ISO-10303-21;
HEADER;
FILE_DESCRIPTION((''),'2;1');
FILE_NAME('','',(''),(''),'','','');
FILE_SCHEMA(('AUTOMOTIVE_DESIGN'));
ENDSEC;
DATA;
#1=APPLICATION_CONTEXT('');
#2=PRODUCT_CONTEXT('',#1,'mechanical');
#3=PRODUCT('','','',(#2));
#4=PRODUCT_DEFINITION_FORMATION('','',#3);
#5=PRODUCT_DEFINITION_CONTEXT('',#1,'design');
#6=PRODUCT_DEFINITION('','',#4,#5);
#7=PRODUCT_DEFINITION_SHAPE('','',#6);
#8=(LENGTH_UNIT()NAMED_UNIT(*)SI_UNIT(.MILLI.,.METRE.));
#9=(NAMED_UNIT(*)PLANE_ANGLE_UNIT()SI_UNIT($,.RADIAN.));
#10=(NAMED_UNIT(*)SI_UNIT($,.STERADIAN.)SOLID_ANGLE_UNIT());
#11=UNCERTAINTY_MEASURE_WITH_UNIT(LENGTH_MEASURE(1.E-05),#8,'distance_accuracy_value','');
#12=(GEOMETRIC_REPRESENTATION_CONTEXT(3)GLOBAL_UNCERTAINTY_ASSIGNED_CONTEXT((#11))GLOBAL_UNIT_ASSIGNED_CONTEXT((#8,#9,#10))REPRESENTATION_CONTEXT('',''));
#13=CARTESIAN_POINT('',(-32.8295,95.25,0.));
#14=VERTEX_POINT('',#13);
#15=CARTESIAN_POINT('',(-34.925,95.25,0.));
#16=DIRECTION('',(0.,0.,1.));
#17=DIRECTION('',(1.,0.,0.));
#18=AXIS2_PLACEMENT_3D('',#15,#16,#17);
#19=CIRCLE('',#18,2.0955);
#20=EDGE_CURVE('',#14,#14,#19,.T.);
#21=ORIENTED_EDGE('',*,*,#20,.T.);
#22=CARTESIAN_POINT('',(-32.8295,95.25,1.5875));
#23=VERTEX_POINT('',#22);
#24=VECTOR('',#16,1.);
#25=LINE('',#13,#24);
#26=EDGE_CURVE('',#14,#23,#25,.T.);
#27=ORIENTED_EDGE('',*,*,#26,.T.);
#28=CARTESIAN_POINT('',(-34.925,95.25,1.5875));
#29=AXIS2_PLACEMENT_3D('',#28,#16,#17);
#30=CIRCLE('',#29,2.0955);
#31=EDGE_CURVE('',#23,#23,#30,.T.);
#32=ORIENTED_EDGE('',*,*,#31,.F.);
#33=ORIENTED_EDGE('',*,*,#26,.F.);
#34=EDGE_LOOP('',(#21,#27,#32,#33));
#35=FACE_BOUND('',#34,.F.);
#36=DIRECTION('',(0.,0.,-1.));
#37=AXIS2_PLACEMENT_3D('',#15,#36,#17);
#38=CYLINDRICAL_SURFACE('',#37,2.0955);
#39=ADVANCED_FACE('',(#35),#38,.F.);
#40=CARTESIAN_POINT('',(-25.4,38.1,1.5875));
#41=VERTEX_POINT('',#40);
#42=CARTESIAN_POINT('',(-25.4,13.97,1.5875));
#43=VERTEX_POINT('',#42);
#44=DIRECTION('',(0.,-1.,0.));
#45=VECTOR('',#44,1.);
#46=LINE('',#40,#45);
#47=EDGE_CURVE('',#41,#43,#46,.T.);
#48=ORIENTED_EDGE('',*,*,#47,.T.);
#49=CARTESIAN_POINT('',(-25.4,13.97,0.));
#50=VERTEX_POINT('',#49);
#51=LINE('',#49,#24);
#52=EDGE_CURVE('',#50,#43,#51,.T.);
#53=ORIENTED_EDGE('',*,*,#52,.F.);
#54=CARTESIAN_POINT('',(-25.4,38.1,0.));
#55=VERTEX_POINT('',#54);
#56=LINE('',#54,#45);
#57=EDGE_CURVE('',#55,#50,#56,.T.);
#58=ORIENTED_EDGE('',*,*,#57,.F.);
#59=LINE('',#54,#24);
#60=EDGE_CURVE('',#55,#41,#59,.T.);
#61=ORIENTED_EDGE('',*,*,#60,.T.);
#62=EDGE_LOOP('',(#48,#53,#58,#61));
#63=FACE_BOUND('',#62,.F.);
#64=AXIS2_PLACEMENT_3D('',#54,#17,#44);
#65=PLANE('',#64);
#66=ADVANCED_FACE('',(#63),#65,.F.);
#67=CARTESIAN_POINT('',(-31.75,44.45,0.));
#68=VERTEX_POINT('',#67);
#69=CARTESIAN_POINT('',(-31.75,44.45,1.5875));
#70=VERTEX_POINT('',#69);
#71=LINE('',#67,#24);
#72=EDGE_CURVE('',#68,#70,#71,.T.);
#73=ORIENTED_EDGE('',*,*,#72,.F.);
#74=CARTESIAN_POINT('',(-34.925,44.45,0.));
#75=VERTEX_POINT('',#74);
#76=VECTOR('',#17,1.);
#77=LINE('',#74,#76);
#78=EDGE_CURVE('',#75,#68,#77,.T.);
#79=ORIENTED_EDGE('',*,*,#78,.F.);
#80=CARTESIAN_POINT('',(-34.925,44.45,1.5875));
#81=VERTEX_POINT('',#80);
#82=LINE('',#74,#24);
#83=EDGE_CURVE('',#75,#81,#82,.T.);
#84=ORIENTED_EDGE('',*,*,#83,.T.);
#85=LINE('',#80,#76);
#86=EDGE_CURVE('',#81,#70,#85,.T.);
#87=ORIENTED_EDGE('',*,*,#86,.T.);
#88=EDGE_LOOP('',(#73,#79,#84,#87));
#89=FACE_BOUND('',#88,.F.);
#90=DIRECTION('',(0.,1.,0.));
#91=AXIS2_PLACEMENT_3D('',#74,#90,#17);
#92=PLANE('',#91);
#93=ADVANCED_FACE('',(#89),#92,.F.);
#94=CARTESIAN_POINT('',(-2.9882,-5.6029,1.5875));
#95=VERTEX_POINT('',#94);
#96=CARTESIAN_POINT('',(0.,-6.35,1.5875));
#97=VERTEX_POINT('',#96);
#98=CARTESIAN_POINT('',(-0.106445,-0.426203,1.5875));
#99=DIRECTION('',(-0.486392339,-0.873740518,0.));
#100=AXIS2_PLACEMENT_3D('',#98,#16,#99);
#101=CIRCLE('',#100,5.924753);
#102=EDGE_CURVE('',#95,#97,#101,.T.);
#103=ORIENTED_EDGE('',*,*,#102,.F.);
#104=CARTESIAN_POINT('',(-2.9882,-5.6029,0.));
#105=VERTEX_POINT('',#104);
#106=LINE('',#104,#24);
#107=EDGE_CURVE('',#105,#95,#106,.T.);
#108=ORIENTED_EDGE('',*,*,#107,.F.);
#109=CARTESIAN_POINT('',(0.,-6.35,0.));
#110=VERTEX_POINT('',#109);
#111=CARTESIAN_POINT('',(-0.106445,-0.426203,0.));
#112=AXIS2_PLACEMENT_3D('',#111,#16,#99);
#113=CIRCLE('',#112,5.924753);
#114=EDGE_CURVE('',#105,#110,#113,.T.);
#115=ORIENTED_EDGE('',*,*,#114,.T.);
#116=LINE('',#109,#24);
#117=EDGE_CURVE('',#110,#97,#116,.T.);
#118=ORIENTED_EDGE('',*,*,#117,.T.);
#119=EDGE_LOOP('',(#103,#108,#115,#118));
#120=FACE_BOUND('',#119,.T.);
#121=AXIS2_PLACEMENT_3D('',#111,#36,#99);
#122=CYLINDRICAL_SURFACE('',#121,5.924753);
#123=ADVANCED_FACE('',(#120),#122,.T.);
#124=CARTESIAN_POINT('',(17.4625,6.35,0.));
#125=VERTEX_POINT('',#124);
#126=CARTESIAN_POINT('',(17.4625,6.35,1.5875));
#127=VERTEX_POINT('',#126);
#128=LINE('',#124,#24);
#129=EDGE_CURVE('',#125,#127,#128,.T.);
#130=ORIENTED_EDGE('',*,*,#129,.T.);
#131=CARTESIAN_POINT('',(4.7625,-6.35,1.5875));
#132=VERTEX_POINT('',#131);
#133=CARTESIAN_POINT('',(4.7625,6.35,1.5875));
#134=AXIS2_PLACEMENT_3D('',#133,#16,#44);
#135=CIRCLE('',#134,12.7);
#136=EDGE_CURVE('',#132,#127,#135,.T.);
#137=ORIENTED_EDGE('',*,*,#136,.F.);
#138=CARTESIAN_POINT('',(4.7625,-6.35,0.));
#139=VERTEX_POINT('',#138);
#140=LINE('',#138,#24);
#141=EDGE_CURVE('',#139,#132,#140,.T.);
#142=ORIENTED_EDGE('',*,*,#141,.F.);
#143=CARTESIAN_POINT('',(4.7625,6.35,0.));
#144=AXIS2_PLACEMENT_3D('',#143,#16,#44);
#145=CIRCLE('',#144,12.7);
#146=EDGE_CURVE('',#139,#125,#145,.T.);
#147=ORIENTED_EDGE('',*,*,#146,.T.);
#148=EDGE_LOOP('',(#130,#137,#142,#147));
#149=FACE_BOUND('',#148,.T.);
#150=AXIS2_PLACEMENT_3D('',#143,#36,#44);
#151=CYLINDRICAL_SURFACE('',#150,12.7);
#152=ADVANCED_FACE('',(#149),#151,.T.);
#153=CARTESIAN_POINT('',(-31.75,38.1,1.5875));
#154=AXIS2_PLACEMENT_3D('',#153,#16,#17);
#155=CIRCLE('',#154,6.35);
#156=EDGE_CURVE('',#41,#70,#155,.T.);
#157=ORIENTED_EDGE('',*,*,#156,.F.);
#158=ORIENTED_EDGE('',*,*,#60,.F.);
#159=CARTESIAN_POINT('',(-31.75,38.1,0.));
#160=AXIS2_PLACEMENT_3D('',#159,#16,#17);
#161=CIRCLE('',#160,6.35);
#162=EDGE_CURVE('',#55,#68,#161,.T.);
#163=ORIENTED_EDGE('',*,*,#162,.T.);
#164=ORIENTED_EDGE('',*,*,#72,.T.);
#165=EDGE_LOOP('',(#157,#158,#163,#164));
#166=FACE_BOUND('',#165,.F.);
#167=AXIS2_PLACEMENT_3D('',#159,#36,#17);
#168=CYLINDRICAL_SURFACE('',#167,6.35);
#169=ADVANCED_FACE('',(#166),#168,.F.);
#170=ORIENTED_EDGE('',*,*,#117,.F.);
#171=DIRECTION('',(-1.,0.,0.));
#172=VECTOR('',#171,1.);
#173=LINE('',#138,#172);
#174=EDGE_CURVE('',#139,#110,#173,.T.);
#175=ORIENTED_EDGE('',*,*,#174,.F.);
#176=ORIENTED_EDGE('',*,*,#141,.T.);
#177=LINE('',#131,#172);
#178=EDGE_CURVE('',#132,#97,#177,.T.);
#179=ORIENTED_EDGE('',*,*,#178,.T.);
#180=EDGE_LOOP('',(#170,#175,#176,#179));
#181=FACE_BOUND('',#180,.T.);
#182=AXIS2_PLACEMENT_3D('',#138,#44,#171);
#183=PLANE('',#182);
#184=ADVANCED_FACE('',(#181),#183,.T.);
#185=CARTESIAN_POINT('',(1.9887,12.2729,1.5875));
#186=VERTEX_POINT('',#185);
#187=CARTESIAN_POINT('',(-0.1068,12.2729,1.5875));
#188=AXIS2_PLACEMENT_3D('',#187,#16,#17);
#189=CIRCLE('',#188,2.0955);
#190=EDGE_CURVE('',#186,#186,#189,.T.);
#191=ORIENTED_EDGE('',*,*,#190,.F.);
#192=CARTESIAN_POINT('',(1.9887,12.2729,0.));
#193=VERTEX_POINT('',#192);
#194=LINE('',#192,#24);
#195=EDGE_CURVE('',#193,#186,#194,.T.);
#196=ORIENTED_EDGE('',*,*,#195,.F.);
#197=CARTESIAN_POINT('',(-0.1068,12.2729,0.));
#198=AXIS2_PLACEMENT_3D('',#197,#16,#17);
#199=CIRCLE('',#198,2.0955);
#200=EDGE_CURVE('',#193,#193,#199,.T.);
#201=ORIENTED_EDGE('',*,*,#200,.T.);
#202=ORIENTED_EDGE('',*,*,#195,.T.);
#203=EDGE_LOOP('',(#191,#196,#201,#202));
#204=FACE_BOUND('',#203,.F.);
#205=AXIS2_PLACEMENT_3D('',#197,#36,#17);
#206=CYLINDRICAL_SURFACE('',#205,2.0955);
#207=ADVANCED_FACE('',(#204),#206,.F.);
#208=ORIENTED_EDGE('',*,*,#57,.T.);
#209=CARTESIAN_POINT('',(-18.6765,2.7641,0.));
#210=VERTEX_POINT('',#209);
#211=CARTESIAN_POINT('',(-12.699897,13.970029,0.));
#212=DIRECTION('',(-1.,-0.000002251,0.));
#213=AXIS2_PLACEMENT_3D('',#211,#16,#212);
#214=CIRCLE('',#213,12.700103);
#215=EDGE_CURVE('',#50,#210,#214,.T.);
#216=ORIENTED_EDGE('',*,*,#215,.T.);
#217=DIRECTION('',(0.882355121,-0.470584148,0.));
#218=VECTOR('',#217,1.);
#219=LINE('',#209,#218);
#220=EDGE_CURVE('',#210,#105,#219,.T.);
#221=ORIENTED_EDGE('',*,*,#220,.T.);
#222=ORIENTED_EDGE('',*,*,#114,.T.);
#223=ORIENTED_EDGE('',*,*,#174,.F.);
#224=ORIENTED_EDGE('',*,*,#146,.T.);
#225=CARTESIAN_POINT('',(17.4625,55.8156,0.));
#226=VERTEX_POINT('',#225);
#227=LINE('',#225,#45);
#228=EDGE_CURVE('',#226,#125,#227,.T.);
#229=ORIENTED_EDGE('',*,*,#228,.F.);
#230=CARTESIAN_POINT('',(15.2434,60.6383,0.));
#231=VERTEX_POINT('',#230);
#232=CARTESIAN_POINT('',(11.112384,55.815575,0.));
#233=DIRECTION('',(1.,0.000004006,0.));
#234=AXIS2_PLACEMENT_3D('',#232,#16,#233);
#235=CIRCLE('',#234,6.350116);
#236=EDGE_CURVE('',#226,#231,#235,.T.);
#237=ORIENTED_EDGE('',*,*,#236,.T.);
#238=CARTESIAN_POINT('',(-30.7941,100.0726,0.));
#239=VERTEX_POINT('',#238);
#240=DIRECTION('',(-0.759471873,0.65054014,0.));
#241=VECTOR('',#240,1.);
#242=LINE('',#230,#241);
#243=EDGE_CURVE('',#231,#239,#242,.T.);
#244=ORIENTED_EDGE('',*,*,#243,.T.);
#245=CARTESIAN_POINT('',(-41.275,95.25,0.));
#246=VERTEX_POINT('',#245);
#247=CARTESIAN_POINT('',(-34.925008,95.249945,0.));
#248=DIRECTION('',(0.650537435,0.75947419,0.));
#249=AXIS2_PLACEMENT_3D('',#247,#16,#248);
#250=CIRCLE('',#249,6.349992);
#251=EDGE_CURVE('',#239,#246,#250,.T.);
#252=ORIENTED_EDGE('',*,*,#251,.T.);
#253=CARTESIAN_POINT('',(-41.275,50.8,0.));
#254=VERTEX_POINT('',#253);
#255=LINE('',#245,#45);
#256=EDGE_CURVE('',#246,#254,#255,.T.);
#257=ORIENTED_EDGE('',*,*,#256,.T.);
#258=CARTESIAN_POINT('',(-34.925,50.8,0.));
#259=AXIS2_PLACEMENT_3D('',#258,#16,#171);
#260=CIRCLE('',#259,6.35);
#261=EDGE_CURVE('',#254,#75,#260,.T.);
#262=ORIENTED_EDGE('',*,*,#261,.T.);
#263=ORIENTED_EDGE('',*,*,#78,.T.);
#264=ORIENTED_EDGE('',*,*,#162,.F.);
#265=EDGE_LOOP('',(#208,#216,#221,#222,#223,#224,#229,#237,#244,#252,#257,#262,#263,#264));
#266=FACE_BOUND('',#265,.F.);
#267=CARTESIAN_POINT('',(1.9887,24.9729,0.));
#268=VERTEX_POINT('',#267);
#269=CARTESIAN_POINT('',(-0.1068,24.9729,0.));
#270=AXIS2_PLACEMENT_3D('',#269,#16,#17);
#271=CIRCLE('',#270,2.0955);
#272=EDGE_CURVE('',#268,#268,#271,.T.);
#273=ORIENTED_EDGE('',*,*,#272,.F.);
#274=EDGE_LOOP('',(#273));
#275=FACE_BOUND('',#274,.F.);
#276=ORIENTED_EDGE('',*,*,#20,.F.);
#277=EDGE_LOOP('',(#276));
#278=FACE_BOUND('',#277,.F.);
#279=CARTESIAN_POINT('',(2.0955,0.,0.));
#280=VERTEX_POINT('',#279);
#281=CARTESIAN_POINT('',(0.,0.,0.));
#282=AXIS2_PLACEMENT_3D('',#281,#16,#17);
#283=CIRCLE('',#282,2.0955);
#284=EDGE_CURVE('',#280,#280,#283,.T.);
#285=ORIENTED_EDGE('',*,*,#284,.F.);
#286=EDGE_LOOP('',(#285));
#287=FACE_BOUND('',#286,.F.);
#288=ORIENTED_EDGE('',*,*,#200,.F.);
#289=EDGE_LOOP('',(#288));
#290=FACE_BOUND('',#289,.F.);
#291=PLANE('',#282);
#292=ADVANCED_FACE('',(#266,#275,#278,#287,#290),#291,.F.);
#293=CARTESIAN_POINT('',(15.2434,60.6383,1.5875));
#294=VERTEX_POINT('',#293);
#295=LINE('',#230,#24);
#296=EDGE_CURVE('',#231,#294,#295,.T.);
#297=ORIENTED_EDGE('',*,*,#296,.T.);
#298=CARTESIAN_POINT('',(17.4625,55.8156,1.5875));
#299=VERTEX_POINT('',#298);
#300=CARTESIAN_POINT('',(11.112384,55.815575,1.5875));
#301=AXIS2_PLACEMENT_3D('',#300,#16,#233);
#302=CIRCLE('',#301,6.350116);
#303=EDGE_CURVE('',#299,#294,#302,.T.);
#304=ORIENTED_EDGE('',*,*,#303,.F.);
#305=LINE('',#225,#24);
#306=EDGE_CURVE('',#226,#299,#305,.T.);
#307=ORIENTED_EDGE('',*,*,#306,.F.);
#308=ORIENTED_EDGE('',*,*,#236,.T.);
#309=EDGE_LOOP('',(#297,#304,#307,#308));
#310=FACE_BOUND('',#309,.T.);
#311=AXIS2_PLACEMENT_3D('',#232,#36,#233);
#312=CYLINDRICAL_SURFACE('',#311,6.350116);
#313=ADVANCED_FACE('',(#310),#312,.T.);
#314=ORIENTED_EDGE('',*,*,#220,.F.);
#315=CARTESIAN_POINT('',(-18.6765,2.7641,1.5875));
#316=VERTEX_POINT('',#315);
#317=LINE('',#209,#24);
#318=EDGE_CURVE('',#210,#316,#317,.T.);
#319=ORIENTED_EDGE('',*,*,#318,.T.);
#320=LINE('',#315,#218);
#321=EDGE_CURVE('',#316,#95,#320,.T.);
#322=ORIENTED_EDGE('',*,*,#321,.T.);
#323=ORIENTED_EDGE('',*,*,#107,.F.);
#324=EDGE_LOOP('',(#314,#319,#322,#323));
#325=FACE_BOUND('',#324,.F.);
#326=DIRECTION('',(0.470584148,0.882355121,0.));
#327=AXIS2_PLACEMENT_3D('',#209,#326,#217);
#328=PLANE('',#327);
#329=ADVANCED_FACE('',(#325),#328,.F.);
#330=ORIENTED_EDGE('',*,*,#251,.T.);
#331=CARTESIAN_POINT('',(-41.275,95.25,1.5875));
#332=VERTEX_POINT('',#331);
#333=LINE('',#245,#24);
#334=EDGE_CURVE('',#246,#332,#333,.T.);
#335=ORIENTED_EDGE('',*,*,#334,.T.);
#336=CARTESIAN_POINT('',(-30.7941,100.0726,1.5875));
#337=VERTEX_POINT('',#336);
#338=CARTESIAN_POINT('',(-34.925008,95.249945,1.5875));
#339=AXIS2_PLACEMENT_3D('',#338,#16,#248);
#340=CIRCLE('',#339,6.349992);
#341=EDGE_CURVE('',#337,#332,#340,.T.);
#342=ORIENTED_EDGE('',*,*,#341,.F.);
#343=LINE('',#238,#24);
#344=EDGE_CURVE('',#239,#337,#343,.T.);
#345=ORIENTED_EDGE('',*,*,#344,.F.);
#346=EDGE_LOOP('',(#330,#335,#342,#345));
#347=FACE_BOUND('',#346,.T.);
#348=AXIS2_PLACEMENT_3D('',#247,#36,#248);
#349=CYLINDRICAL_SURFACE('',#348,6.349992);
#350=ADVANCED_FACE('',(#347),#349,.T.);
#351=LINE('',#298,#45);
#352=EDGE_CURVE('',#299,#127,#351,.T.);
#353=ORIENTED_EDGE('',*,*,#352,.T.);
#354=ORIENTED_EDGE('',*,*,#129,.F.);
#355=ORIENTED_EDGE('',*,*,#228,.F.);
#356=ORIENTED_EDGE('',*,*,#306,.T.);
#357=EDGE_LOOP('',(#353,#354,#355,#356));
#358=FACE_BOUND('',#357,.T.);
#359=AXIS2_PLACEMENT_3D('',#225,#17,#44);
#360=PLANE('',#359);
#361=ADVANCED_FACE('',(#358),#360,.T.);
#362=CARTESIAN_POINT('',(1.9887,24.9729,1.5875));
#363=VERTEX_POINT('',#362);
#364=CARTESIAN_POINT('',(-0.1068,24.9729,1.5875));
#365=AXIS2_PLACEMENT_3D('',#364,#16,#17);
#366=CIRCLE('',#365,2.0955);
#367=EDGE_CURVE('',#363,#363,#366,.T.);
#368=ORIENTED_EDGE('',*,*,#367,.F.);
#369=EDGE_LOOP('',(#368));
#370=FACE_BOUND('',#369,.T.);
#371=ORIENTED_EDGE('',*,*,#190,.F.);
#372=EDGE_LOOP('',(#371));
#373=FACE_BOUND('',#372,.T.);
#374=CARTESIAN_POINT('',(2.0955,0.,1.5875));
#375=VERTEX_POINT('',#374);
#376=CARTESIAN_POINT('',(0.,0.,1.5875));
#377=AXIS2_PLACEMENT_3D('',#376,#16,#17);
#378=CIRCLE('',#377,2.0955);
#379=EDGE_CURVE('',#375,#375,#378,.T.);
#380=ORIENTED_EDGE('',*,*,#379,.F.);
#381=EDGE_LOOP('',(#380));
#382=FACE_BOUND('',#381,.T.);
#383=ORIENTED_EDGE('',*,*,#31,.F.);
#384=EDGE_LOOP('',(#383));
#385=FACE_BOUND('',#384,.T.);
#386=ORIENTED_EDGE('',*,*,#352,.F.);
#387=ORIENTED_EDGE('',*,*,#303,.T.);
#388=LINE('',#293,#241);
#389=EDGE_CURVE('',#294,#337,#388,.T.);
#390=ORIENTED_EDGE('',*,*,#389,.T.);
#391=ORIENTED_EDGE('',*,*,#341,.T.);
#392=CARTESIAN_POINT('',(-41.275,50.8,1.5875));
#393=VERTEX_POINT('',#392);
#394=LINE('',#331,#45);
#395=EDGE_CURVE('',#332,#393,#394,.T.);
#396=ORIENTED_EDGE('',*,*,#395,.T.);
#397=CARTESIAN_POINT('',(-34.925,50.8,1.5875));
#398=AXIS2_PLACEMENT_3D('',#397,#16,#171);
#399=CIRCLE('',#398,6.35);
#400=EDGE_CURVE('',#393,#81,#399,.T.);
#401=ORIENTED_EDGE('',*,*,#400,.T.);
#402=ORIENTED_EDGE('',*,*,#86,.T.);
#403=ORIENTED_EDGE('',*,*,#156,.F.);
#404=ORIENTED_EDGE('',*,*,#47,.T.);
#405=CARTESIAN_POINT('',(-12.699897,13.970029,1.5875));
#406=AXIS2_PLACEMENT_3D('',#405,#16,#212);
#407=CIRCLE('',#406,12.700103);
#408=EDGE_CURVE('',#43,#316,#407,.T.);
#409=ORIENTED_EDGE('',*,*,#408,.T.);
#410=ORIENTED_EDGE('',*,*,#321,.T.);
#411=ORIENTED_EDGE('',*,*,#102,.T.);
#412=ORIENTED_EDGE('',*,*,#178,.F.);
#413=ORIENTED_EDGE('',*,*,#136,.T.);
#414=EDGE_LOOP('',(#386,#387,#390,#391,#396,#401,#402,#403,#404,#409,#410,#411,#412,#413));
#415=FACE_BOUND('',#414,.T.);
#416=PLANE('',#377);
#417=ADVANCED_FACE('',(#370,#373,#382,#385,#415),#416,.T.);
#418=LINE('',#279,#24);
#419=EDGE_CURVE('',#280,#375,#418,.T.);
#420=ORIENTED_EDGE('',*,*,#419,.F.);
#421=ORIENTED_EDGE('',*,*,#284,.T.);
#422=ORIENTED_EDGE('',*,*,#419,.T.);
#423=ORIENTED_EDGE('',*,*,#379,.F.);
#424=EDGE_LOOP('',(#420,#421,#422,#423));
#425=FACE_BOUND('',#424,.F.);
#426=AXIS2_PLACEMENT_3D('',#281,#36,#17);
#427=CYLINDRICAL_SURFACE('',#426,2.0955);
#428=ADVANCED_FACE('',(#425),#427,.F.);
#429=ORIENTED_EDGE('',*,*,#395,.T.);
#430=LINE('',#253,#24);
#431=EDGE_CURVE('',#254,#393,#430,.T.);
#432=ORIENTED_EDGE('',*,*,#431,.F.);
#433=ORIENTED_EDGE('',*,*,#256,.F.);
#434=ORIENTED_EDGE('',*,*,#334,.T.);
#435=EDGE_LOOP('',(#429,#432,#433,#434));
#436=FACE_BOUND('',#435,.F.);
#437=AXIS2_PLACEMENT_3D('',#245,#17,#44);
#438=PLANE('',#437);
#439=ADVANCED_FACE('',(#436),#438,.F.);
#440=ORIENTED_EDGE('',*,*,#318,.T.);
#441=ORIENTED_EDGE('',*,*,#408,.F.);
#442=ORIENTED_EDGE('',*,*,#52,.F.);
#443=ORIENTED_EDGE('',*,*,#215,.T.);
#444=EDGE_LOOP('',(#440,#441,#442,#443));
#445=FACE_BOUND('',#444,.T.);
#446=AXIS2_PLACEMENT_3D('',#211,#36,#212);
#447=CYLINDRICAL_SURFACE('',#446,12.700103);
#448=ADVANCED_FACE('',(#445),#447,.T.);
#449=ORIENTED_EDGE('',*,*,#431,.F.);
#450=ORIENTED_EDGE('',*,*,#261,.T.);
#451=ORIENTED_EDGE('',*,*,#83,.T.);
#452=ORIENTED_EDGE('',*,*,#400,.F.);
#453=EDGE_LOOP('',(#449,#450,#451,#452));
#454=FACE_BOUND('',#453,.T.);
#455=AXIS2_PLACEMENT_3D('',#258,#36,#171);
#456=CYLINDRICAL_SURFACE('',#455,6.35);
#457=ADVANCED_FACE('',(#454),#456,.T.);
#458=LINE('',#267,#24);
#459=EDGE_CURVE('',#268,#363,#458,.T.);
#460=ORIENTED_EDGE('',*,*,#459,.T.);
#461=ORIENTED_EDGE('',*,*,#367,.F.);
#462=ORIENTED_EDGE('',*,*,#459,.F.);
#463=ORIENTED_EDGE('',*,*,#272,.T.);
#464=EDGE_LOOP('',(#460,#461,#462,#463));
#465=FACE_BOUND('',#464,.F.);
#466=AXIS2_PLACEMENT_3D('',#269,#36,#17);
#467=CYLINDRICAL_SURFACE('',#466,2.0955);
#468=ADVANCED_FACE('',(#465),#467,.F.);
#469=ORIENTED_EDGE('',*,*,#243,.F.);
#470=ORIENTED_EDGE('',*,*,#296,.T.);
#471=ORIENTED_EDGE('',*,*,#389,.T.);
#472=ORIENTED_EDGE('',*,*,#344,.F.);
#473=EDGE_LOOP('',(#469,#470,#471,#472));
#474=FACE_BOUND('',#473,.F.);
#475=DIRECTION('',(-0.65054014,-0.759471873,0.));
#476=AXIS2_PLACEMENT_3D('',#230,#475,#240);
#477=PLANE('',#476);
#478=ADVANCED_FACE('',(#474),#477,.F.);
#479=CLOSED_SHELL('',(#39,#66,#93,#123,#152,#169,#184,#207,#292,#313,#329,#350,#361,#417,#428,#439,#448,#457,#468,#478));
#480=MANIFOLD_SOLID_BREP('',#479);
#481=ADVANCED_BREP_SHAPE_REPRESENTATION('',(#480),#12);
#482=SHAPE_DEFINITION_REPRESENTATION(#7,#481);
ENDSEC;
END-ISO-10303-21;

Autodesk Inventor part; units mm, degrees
ref_plane "YZ Plane" through (0, 0, 0) normal (1, 0, 0) x (0, 1, 0)
ref_plane "XZ Plane" through (0, 0, 0) normal (0, 1, 0) x (-1, 0, 0)
ref_plane "XY Plane" through (0, 0, 0) normal (0, 0, 1) x (1, 0, 0)
sketch "main" plane through (0, 0, 0) normal (0, 0, 1) x (1, 0, 0)
  arc A0 (-13.083, -30.8821) -> (-6.3594, -42.088) centre (-0.383, -30.8821) ccw
  line L0 (-13.083, -6.7521) -> (-13.083, -30.8821)
  arc A1 (-13.083, -6.7521) -> (-19.433, -0.4021) centre (-19.433, -6.7521) ccw
  line L1 (-6.3594, -42.088) -> (9.3288, -50.4551)
  line L2 (29.7795, 10.9635) -> (29.7795, -38.5021)
  arc A2 (29.7795, 10.9635) -> (27.5605, 15.7861) centre (23.4295, 10.9635) ccw
  circle A3 centre (12.317, -44.8521) radius 2.0955
  arc A4 (9.3288, -50.4551) -> (12.317, -51.2021) centre (12.2103, -45.2792) ccw
  line L3 (17.0795, -51.2021) -> (12.317, -51.2021)
  arc A5 (17.0795, -51.2021) -> (29.7795, -38.5021) centre (17.0795, -38.5021) ccw
  circle A6 centre (-22.608, 50.3979) radius 2.0955
  arc A7 (-18.477, 55.2205) -> (-28.958, 50.3979) centre (-22.608, 50.3979) ccw
  line L4 (27.5605, 15.7861) -> (-18.477, 55.2205)
  line L5 (-22.608, -0.4021) -> (-19.433, -0.4021)
  arc A8 (-28.958, 5.9479) -> (-22.608, -0.4021) centre (-22.608, 5.9479) ccw
  line L6 (-28.958, 50.3979) -> (-28.958, 5.9479)
  point P0 (-1.5201, -8.3134)
  dimension "d1" = 4.191
  dimension "d2" = 12.7
  dimension "d3" = 4.191
  dimension "d4" = 12.7
  dimension "d5" = 12.7
  dimension "d6" = 6.35
  dimension "d7" = 6.35
sketch "Sketch1" plane through (0, 0, 0) normal (0, 0, 1) x (1, 0, 0)
  circle A0 centre (-0.1068, 24.9729) radius 2.0955
  circle A1 centre (-0.1068, 12.2729) radius 2.0955
  arc A2 (-25.4, 13.97) -> (-18.6765, 2.7641) centre (-12.7, 13.97) ccw
  line L0 (-25.4, 38.1) -> (-25.4, 13.97)
  arc A3 (-25.4, 38.1) -> (-31.75, 44.45) centre (-31.75, 38.1) ccw
  line L1 (-18.6765, 2.7641) -> (-2.9882, -5.6029)
  line L2 (17.4625, 55.8156) -> (17.4625, 6.35)
  arc A4 (17.4625, 55.8156) -> (15.2434, 60.6383) centre (11.1125, 55.8156) ccw
  circle A5 centre (0, 0) radius 2.0955
  arc A6 (-2.9882, -5.6029) -> (0, -6.35) centre (-0.1068, -0.4271) ccw
  line L3 (4.7625, -6.35) -> (0, -6.35)
  arc A7 (4.7625, -6.35) -> (17.4625, 6.35) centre (4.7625, 6.35) ccw
  circle A8 centre (-34.925, 95.25) radius 2.0955
  arc A9 (-30.7941, 100.0726) -> (-41.275, 95.25) centre (-34.925, 95.25) ccw
  line L4 (15.2434, 60.6383) -> (-30.7941, 100.0726)
  line L5 (-34.925, 44.45) -> (-31.75, 44.45)
  arc A10 (-41.275, 50.8) -> (-34.925, 44.45) centre (-34.925, 50.8) ccw
  line L6 (-41.275, 95.25) -> (-41.275, 50.8)
  dimension "d11" = 4.191
  dimension "d12" = 4.191
extrude "Extrusion1" add sketch "Sketch1" along normal blind 1.5875
properties part number "back_sled" material "Acetal Resin, White"
